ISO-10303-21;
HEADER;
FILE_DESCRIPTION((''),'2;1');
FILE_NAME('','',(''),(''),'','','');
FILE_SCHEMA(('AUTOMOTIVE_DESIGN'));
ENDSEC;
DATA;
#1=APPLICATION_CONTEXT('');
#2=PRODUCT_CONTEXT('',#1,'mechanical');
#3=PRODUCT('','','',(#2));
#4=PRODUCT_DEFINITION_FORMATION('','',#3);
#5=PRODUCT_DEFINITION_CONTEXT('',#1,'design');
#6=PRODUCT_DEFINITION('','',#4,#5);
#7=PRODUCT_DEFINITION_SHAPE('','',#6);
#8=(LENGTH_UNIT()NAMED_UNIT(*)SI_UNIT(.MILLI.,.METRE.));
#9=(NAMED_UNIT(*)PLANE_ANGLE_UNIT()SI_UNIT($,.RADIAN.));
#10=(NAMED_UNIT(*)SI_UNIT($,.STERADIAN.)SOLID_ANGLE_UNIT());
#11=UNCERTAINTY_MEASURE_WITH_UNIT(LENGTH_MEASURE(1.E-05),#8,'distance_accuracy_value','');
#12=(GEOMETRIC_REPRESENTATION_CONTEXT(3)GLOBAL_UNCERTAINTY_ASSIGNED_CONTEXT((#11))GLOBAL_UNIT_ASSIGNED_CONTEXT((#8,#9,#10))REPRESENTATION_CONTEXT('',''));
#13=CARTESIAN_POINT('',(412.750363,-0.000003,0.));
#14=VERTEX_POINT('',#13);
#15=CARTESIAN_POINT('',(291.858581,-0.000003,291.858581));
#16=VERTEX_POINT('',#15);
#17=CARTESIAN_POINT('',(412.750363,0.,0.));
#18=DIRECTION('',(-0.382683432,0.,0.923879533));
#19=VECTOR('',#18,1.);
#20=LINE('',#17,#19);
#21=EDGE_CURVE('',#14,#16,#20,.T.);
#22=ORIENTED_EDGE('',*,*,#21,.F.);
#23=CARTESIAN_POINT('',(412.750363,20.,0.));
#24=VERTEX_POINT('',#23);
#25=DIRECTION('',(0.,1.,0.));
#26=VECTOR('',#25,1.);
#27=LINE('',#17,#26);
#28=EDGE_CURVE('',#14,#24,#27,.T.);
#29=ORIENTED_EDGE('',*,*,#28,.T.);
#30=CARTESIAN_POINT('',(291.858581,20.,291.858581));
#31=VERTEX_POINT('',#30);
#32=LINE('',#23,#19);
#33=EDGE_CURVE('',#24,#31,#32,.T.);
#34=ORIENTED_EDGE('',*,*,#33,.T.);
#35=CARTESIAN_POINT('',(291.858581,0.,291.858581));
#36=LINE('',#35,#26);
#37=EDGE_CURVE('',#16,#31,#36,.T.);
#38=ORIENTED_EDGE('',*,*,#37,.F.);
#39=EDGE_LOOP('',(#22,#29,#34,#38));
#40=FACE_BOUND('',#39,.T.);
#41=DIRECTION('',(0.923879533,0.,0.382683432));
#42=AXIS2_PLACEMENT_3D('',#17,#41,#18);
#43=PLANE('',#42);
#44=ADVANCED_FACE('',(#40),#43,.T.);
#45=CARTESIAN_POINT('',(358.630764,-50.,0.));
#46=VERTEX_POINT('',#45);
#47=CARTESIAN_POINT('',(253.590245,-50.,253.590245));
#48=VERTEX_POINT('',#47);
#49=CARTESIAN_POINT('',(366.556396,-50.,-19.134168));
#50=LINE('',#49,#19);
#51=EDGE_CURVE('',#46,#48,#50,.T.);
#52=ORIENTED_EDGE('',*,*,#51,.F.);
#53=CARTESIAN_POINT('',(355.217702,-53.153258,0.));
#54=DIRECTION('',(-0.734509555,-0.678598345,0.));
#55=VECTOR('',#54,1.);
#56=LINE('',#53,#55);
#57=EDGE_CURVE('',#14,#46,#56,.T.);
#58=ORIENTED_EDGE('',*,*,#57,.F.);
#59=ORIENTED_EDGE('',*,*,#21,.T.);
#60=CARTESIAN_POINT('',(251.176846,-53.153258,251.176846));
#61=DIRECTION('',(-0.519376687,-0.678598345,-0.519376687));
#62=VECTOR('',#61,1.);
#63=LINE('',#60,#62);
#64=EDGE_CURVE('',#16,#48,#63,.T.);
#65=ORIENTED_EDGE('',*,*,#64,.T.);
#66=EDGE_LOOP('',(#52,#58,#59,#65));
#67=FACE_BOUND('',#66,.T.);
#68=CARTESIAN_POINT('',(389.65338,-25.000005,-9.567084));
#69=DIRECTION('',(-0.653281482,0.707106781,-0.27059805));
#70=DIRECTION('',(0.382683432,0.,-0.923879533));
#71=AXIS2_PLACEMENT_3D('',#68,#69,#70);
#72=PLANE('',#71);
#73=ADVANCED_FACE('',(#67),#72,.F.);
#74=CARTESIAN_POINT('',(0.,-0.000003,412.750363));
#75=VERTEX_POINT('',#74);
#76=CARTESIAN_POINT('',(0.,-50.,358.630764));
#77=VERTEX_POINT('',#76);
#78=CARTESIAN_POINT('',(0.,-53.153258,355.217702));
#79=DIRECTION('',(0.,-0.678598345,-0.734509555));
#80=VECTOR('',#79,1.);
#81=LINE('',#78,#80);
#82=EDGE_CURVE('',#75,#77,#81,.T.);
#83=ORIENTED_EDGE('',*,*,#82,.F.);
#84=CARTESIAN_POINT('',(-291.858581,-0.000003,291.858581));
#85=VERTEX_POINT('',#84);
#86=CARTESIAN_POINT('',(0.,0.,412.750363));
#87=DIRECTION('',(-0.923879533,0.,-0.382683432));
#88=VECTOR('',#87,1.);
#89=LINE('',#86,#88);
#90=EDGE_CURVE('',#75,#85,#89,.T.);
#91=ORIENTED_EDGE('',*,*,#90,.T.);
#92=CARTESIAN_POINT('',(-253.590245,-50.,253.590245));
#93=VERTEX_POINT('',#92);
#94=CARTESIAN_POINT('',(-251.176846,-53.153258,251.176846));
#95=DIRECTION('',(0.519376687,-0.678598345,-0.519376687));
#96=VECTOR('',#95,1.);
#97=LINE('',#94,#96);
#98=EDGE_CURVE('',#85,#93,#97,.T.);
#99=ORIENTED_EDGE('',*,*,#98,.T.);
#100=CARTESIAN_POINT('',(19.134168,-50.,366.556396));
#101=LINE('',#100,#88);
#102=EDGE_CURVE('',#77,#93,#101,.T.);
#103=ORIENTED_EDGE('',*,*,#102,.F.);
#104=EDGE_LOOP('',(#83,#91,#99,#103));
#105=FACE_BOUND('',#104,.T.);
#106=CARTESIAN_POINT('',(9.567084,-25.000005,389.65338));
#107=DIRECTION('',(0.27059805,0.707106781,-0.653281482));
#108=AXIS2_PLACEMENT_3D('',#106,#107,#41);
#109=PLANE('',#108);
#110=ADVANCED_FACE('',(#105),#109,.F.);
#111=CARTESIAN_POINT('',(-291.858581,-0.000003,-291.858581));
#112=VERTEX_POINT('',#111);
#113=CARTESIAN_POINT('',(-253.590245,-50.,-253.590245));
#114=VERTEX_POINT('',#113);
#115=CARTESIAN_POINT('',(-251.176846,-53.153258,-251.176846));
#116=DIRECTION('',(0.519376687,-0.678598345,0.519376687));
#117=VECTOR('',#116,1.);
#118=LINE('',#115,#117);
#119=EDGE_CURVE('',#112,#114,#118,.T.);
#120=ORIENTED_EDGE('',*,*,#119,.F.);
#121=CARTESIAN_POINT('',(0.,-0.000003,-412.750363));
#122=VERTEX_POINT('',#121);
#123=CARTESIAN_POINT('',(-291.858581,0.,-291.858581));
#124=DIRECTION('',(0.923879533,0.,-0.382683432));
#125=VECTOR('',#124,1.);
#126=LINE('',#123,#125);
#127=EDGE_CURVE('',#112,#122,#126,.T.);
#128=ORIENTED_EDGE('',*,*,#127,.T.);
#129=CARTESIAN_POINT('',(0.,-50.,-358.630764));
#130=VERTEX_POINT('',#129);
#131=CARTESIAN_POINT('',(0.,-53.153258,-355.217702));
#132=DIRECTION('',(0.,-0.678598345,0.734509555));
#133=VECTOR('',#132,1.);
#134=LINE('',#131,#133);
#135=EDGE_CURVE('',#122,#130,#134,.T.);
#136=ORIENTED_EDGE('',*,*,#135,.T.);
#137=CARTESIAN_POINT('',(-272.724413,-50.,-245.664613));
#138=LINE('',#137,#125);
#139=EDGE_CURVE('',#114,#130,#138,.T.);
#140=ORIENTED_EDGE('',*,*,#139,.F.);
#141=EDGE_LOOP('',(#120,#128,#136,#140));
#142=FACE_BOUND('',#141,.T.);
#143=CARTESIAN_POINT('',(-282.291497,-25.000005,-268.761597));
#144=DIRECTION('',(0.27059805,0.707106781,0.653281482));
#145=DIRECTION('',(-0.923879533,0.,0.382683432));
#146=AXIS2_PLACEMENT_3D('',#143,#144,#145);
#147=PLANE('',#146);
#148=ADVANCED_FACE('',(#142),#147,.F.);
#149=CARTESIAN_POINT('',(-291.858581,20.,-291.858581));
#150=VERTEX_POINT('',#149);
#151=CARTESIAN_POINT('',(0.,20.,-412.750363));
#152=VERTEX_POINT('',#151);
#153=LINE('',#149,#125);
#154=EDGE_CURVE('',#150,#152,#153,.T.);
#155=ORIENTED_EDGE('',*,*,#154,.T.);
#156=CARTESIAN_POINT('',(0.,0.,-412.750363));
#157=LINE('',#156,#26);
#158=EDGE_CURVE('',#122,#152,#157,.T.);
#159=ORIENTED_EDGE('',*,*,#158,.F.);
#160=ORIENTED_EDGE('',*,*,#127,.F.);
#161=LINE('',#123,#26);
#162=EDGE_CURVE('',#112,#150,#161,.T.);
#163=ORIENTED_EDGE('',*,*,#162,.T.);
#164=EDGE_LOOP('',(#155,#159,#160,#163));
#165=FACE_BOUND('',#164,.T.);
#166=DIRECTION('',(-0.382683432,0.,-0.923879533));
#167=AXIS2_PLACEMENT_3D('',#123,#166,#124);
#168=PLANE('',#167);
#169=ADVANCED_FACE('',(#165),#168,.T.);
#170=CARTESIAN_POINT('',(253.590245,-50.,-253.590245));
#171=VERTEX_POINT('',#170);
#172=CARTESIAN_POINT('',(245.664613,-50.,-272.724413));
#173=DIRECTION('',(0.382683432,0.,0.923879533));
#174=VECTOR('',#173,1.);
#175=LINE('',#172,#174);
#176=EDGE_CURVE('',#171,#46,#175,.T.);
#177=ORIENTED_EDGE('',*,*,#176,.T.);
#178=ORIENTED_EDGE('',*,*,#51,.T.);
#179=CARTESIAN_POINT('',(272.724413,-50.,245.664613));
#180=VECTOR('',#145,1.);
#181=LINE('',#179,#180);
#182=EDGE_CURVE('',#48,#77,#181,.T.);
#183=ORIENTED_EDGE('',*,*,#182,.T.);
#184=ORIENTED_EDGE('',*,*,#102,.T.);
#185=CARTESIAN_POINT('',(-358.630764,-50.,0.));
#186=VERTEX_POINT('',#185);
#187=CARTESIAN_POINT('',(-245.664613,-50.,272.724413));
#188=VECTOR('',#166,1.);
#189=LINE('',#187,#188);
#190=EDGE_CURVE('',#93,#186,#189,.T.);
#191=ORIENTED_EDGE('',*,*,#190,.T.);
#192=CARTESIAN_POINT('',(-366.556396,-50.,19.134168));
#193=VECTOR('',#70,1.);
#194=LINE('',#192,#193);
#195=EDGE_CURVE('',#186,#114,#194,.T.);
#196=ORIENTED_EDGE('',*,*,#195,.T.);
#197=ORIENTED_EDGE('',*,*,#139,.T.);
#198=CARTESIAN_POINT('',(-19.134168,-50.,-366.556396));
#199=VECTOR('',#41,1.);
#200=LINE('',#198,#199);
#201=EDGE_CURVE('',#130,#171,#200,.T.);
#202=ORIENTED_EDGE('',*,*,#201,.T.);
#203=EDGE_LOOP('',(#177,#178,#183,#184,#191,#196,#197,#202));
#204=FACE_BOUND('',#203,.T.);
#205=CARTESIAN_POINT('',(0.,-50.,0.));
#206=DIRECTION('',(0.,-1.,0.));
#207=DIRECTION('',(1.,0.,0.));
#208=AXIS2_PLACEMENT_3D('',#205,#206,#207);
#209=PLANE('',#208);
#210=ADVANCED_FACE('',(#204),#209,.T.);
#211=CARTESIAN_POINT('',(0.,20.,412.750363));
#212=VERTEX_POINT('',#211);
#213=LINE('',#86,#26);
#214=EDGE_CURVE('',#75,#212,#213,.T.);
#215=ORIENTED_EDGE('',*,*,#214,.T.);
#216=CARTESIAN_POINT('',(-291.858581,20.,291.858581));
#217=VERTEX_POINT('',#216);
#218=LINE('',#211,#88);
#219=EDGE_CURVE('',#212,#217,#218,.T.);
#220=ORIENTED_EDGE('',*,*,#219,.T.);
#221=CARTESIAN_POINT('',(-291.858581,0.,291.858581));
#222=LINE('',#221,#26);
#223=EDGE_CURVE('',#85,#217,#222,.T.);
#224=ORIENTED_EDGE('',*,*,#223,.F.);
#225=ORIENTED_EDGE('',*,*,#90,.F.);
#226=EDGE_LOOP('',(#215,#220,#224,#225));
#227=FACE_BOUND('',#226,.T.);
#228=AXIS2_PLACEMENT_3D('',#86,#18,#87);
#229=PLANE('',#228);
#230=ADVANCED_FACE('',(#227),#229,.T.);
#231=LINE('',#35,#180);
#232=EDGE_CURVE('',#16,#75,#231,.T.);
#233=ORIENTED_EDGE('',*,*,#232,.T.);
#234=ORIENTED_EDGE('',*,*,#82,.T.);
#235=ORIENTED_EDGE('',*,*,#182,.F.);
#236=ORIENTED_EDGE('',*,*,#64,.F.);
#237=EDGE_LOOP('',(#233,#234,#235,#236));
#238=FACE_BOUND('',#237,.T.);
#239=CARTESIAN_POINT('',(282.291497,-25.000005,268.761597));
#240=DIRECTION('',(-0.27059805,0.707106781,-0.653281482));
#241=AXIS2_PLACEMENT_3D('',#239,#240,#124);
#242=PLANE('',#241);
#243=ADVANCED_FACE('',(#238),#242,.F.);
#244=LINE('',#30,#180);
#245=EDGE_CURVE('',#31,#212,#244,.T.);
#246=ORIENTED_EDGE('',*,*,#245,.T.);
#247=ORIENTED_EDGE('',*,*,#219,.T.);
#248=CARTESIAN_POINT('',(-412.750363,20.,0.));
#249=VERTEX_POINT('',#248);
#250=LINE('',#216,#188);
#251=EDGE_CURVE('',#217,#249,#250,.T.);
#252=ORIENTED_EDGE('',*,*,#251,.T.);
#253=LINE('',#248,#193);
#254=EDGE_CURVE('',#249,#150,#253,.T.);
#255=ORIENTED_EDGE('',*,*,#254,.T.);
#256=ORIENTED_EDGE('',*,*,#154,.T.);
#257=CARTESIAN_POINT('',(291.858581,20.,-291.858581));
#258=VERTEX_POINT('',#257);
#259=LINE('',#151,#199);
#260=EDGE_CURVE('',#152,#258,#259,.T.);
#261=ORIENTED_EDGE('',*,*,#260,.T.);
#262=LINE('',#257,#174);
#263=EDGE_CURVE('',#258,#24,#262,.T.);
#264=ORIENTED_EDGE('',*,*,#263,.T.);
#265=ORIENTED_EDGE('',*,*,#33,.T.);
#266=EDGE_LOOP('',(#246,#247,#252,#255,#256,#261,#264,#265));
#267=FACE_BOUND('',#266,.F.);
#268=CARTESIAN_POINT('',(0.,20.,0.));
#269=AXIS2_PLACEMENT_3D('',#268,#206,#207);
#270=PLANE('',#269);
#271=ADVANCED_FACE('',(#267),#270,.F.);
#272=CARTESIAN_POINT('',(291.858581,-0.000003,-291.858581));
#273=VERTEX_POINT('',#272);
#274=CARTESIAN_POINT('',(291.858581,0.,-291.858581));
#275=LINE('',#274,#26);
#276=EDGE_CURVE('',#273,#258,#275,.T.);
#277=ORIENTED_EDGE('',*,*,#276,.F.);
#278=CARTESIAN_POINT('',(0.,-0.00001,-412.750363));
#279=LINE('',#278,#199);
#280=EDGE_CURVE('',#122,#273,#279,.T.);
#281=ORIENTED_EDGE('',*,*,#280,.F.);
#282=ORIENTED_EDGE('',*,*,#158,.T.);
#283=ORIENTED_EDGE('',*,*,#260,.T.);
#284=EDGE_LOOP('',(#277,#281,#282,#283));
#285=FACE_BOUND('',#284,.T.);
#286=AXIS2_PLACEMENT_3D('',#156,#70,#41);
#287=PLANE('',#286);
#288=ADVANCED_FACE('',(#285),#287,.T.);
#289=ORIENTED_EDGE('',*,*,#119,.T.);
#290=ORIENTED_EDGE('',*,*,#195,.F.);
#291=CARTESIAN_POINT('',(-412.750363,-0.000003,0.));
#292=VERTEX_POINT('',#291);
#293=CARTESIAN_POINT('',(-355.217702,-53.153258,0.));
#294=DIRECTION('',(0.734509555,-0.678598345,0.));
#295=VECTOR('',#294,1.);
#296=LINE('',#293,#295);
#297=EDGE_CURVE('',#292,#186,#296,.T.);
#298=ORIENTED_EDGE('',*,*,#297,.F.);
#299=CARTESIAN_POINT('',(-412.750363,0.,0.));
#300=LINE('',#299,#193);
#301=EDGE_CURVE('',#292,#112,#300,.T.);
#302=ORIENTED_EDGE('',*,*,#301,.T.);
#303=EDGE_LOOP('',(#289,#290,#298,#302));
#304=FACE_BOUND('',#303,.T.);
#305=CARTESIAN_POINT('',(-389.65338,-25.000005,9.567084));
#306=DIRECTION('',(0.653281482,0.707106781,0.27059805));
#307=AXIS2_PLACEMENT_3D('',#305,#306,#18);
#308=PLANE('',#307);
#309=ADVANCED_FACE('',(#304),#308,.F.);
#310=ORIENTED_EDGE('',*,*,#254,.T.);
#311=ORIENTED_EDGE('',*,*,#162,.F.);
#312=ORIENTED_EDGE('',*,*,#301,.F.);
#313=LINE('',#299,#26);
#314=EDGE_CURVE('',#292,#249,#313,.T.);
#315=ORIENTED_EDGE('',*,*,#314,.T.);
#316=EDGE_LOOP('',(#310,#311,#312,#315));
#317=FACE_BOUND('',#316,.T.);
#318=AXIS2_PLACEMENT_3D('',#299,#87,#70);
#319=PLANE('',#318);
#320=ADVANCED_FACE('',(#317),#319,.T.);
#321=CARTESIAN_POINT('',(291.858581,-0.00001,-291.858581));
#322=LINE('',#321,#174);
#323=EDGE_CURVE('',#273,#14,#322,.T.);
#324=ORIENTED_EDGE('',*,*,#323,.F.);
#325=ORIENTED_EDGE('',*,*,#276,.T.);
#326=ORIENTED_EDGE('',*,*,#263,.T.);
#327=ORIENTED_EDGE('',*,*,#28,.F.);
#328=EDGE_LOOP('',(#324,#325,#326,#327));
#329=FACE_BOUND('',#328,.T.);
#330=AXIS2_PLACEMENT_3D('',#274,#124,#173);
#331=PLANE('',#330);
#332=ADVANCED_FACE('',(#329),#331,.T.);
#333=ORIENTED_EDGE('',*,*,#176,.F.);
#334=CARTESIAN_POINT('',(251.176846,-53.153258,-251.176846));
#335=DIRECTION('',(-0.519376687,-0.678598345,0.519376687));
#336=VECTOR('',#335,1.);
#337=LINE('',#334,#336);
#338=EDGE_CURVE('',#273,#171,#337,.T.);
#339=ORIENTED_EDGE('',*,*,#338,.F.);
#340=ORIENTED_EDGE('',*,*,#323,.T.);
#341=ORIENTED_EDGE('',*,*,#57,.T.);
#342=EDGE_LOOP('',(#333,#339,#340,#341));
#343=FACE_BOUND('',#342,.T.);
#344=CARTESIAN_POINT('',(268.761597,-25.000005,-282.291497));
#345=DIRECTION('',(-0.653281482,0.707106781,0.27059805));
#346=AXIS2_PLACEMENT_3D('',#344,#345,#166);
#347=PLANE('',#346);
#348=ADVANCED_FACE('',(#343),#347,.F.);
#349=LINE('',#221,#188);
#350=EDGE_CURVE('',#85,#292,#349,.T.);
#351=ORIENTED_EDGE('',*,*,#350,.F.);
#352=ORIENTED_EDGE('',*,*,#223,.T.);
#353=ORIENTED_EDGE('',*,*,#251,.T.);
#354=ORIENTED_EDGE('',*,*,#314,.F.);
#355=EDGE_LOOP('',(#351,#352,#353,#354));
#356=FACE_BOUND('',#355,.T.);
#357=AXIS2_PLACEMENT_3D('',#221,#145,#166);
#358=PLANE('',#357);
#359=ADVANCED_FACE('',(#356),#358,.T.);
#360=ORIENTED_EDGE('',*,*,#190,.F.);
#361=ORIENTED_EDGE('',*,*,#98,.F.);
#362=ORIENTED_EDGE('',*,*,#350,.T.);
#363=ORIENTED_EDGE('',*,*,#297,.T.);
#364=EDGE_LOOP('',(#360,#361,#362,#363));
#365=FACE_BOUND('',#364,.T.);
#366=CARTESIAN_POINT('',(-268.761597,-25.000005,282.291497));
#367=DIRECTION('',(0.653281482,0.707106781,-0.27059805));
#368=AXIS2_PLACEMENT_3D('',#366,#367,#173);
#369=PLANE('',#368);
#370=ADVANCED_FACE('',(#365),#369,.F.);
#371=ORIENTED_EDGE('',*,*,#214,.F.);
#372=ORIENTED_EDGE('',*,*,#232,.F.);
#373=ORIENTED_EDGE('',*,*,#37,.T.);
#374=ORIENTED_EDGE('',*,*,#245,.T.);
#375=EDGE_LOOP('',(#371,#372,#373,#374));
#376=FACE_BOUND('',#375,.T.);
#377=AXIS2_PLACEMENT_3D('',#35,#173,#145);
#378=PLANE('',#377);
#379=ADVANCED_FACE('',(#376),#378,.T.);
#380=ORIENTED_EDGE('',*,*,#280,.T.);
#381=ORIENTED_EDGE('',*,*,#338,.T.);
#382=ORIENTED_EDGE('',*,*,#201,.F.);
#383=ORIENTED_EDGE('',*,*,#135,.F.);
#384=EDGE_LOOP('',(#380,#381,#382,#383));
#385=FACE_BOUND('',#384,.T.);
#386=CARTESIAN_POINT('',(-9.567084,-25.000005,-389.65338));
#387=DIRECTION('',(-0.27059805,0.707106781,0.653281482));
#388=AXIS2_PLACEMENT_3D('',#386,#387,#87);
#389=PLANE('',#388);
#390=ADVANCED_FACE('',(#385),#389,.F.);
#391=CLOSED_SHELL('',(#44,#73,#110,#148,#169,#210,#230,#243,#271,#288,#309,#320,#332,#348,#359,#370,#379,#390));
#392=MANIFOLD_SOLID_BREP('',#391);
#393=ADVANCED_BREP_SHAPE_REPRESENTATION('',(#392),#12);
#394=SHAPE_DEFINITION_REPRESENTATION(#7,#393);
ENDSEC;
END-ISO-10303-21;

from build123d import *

# Parameters (mm, degrees)
F1_DEPTH = 50
F2_SIZE  = 49.99999
F3_DEPTH = 20


# Not quite as in the source:
# - a fillet or chamfer is up to 0.001 mm smaller than in the source, because OpenCascade refuses the exact size


with BuildPart() as f1:
    # F0 (on Front) → F1 (new body)
    with BuildSketch(Plane.XZ):
        Polygon((291.8585808619, -291.8585808619), (412.7503633499, 0), (291.8585808619, 291.8585808619), (0, 412.7503633499), (-291.8585808619, 291.8585808619), (-412.7503633499, 0), (-291.8585808619, -291.8585808619), (0, -412.7503633499), align=None)
    extrude(amount=F1_DEPTH)

    # F2 (size 50 in the source; OpenCascade refuses exactly that, so slightly less here)
    f2_edges = [f1.edges().sort_by_distance(p)[0] for p in [
        (-352.304472, -50, -145.92929),
        (-145.92929, -50, -352.304472),
        (145.92929, -50, -352.304472),
        (352.304472, -50, -145.92929),
        (352.304472, -50, 145.92929),
        (145.92929, -50, 352.304472),
        (-145.92929, -50, 352.304472),
        (-352.304472, -50, 145.92929),
    ]]
    chamfer(f2_edges, length=F2_SIZE)

    # F0 (on Front) → F3 (join)
    with BuildSketch(Plane.XZ):
        Polygon((291.8585808619, -291.8585808619), (412.7503633499, 0), (291.8585808619, 291.8585808619), (0, 412.7503633499), (-291.8585808619, 291.8585808619), (-412.7503633499, 0), (-291.8585808619, -291.8585808619), (0, -412.7503633499), align=None)
    extrude(amount=-F3_DEPTH)


solid = f1.part
